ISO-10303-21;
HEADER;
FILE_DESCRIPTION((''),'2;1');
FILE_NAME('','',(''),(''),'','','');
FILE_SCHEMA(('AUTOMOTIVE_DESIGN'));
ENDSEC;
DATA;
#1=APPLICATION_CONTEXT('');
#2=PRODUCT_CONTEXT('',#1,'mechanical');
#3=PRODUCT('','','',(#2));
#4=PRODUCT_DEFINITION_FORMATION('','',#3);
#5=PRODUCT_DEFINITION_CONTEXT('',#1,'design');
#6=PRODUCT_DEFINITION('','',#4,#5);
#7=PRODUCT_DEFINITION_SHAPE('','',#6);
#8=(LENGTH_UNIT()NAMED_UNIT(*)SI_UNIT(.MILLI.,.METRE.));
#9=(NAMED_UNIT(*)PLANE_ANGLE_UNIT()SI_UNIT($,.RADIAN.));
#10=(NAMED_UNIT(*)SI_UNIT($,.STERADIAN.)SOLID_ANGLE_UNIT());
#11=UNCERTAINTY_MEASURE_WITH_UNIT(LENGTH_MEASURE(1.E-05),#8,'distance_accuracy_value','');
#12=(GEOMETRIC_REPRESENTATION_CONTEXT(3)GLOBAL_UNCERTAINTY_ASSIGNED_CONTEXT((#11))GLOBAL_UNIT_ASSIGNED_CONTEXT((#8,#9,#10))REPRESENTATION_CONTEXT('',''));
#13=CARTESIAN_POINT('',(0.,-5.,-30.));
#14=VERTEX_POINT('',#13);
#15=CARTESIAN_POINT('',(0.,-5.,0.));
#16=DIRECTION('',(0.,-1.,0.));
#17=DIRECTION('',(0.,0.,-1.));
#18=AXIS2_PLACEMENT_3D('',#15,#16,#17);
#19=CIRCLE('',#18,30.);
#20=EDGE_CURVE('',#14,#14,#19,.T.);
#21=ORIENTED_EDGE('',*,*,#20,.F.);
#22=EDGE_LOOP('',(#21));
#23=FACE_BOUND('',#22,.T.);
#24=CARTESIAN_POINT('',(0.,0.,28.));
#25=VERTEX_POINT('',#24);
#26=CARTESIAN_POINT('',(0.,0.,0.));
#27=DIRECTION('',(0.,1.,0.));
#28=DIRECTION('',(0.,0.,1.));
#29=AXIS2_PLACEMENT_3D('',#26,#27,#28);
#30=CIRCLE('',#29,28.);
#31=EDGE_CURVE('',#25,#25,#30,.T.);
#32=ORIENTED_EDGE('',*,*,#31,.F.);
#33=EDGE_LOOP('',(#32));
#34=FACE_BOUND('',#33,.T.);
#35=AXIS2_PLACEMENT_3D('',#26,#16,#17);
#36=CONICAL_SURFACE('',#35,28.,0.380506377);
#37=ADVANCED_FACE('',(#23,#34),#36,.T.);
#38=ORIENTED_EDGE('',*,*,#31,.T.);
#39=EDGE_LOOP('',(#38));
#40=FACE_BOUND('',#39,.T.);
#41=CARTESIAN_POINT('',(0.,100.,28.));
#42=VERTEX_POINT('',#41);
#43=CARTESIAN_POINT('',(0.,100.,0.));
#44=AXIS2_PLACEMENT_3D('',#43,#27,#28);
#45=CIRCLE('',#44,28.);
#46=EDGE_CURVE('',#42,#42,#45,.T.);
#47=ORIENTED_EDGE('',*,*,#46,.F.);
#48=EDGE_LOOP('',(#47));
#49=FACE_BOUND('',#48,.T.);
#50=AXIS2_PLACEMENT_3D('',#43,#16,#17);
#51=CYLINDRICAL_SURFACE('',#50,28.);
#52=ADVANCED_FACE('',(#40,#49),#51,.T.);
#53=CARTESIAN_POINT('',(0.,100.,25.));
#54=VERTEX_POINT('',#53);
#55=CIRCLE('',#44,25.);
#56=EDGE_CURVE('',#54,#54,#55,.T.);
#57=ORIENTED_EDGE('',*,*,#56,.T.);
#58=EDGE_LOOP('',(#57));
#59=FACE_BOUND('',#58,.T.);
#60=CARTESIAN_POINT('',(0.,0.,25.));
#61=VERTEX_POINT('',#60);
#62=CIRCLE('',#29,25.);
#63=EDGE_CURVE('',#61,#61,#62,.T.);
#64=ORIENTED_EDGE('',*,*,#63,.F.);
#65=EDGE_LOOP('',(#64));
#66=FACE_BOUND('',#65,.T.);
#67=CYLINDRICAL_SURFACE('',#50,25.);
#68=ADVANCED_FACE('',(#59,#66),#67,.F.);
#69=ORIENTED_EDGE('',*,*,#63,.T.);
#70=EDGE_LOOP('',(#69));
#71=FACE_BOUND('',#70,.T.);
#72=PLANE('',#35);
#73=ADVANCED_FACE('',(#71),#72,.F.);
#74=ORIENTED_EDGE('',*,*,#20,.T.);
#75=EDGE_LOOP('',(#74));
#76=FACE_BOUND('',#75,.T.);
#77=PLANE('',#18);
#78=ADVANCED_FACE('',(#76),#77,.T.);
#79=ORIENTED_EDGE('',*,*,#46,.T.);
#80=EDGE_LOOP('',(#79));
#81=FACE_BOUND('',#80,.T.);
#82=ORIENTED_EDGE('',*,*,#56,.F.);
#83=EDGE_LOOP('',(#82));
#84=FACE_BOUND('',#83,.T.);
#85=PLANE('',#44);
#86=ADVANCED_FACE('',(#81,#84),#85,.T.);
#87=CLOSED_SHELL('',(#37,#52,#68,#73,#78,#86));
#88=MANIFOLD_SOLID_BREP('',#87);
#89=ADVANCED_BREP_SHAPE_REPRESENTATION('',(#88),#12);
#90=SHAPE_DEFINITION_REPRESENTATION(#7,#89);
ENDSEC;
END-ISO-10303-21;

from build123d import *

# Parameters (mm, degrees)
SKETCH_1_R      = 28
SKETCH_1_R_2    = 25
EXTRUDE_1_DEPTH = 100
SKETCH_2_R      = 30
EXTRUDE_2_DEPTH = 5


with BuildPart() as part:
    # 草图1 → 凸台-拉伸1 (new body)
    with BuildSketch(Plane(origin=(0, 0, 0), x_dir=(1, 0, 0), z_dir=(0, 1, 0))):
        with Locations(Location((0, 0, 0), (0, 0, 270))):
            Circle(SKETCH_1_R)
        with Locations(Location((0, 0, 0), (0, 0, 270))):
            Circle(SKETCH_1_R_2, mode=Mode.SUBTRACT)
    extrude(amount=EXTRUDE_1_DEPTH)

    # 草图2 → 凸台-拉伸2 (add)
    with BuildSketch(Plane.XZ):
        with Locations(Location((0, 0, 0), (0, 0, 270))):
            Circle(SKETCH_2_R)
    extrude(amount=EXTRUDE_2_DEPTH)

    # 倒角3: read off the stored shape, not the designer's step
    # 倒角3 outline → 倒角3 (revolve, cut)
    with BuildSketch(Plane.XY):
        Polygon((30, 0), (28, 0), (30, -5), align=None)
    revolve(axis=Axis((0, 0, 0), (0, 1, 0)), mode=Mode.SUBTRACT)


solid = part.part
